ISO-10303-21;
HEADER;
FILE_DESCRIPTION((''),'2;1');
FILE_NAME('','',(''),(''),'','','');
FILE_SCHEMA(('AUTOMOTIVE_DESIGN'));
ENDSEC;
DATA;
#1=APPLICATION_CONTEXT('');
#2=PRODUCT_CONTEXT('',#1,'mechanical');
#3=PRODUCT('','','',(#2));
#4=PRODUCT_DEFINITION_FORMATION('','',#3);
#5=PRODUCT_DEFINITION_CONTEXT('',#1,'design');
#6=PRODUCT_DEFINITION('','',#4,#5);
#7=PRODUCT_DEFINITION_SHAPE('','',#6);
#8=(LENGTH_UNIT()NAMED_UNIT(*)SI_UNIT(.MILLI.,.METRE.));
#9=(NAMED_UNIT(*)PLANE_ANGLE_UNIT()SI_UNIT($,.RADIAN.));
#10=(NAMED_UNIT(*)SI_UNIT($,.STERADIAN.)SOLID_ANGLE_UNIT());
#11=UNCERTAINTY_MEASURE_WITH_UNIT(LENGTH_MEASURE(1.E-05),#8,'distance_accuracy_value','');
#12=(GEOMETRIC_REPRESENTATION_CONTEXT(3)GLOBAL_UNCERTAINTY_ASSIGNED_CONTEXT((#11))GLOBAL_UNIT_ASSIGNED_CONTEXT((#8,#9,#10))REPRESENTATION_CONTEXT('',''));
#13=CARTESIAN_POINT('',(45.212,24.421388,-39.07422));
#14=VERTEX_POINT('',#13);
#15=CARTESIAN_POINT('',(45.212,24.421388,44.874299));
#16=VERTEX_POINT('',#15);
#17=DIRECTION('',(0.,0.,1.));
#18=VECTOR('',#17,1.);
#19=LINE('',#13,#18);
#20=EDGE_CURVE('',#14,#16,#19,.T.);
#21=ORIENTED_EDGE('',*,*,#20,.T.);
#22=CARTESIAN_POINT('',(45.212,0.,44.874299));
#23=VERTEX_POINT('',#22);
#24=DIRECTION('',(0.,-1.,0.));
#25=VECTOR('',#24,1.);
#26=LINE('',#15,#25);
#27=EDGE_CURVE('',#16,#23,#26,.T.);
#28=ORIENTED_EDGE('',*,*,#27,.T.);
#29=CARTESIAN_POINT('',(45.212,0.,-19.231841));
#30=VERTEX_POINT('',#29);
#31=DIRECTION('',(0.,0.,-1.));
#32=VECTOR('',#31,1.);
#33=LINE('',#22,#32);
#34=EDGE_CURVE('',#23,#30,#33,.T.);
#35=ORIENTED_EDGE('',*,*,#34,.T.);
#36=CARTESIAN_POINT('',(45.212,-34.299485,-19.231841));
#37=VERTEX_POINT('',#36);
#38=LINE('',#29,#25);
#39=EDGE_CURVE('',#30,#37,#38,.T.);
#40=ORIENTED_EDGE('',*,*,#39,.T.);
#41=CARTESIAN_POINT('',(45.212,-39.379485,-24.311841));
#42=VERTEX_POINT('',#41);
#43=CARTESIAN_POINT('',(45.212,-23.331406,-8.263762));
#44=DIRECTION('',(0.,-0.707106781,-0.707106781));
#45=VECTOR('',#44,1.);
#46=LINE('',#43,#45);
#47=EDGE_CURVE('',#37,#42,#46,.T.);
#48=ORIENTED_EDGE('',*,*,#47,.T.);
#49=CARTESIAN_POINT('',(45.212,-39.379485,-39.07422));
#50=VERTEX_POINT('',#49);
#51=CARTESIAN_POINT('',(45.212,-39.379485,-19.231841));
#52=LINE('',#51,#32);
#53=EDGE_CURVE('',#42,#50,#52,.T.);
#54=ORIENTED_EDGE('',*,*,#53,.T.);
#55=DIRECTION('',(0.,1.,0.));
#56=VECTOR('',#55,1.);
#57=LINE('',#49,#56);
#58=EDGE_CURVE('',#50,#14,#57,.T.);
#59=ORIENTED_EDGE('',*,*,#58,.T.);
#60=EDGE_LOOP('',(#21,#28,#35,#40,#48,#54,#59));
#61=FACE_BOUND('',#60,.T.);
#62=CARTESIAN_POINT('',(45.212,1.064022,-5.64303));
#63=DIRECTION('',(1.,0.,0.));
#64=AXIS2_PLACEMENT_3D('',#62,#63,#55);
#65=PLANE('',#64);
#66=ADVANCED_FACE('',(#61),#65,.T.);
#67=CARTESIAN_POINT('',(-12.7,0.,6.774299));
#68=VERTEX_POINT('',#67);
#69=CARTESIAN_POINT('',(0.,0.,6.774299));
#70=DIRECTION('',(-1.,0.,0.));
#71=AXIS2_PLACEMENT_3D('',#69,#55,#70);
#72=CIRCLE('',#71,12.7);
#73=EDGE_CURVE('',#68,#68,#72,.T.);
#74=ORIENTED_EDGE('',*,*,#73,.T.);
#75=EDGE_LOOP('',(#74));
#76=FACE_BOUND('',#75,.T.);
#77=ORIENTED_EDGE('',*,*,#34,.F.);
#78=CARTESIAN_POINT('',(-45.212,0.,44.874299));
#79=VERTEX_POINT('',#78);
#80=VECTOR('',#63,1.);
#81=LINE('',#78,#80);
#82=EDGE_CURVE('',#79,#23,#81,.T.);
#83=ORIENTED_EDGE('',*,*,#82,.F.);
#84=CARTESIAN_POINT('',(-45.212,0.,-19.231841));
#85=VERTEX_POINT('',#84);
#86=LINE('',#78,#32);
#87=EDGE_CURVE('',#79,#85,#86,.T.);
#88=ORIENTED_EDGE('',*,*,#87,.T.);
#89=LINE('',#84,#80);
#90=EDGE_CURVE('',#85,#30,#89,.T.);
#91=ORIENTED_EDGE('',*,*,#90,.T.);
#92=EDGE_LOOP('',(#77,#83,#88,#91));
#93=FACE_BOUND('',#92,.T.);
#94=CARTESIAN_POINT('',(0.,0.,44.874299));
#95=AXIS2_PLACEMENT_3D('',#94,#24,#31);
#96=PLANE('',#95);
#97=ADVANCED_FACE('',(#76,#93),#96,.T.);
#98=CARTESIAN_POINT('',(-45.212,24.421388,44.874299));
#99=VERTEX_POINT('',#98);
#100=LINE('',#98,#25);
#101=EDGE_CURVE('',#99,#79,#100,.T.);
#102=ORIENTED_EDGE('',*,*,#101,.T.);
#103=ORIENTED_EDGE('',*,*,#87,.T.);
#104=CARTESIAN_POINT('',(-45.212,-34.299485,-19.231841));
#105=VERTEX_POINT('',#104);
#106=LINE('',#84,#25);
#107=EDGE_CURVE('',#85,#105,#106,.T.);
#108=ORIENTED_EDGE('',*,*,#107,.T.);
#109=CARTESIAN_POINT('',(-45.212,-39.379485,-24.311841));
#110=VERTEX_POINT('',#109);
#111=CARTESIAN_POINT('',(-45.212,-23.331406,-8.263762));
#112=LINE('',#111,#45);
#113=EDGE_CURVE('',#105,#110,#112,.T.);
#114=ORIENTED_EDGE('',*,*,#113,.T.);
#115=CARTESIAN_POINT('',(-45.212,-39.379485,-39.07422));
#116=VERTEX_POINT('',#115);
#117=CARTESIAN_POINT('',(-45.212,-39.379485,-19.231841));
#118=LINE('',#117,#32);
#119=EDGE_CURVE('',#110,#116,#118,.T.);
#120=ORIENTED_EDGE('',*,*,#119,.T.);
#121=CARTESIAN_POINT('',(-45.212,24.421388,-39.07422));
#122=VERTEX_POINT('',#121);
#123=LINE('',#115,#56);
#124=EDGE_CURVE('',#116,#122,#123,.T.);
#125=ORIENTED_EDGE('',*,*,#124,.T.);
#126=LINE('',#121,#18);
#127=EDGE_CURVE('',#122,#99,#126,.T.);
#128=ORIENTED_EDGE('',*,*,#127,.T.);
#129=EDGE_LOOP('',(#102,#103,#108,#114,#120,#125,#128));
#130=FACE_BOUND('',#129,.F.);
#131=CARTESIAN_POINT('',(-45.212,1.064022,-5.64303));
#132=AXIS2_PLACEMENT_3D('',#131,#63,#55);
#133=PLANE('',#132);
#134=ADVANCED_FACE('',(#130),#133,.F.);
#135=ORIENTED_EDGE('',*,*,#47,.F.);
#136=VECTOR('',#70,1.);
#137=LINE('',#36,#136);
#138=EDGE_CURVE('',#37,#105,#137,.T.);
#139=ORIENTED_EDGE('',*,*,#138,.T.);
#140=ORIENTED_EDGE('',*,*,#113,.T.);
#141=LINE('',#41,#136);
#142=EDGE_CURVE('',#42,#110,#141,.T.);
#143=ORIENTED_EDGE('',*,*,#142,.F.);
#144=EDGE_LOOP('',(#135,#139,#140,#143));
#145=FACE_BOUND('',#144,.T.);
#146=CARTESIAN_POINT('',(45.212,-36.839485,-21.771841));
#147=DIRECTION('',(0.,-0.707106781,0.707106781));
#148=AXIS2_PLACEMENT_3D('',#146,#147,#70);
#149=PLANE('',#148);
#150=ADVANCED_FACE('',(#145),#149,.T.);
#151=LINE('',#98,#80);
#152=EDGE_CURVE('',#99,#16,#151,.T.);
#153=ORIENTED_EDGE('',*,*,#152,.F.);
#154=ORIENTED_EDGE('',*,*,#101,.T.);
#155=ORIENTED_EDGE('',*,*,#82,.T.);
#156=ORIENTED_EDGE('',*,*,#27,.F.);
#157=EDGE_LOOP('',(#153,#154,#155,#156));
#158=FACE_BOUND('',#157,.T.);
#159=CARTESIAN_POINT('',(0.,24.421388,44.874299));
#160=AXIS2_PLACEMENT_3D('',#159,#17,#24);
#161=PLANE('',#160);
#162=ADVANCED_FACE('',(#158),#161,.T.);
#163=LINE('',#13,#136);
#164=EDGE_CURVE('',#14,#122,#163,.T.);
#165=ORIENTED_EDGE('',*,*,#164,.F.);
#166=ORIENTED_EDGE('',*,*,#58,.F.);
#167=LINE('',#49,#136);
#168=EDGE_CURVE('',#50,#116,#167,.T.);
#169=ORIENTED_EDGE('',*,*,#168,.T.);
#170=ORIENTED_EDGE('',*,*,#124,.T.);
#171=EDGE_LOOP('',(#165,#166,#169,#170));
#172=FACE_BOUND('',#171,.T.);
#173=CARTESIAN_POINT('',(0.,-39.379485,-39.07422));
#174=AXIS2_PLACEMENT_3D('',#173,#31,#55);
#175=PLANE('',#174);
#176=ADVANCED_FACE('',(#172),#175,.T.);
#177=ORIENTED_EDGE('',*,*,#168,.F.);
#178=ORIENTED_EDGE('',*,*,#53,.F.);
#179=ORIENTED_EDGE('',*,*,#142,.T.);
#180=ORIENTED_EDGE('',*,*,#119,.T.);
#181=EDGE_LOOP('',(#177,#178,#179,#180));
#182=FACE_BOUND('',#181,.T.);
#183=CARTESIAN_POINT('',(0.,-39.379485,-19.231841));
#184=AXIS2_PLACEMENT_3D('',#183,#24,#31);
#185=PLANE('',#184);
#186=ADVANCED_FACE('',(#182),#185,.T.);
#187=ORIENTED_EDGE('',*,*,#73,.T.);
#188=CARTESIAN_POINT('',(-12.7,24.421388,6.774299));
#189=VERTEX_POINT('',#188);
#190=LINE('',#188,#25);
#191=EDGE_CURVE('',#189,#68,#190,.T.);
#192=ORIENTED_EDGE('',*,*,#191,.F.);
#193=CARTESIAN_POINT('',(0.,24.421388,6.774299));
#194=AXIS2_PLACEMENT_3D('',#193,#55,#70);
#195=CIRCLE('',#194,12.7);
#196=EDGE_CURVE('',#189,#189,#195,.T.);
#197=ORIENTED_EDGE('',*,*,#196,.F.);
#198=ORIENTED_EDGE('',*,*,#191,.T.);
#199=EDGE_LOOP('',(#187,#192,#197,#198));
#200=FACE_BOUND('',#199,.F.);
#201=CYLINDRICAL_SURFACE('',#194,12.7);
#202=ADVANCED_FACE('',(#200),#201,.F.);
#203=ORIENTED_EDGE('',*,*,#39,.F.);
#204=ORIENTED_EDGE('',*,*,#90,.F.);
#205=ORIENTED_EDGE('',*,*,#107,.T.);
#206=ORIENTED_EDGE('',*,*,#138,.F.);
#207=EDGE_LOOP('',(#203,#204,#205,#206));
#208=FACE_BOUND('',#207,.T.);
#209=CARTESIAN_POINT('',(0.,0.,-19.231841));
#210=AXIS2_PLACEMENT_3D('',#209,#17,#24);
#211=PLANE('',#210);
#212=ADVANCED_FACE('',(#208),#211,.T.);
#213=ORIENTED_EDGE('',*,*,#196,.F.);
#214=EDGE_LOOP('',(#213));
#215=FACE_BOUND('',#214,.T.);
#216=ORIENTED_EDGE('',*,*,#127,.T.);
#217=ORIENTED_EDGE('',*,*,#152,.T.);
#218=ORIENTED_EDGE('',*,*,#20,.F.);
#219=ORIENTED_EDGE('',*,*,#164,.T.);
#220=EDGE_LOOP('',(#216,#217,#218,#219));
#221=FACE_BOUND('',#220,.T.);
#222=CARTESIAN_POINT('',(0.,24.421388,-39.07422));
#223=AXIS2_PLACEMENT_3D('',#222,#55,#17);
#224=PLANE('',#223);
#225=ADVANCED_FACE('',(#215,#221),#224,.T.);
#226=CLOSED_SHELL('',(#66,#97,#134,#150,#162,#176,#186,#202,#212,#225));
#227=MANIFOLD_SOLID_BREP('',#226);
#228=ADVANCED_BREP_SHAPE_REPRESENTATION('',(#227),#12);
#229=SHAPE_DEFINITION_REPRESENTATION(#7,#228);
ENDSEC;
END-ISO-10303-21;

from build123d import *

# Parameters (mm, degrees)
F1_DEPTH = 45.212
F2_R     = 12.7
F3_DEPTH = 25.4
F4_SIZE  = 5.08


# Not quite as in the source:
# - a feature of the source that left no trace in its solid (it failed there, or was rolled back) is left out


with BuildPart() as f1:
    # F0 (on Right) → F1 (new body, symmetric)
    with BuildSketch(Plane.YZ):
        Polygon((24.4213882834, -39.0742197633), (24.4213882834, 44.8742993176), (0, 44.8742993176), (0, -19.2318409681), (-39.3794849515, -19.2318409681), (-39.3794849515, -39.0742197633), align=None)
    extrude(amount=F1_DEPTH, both=True)

    # F2 (on face) → F3 (cut)
    with BuildSketch(Plane(origin=(0, 24.4213882834, 0), x_dir=(-1, 0, 0), z_dir=(0, 1, 0))):
        with Locations((0, 6.7742993176)):
            Circle(F2_R)
    extrude(amount=-F3_DEPTH, mode=Mode.SUBTRACT)

    # F4
    f4_edges = [f1.edges().sort_by_distance(p)[0] for p in [
        (0, -39.379485, -19.231841),
    ]]
    chamfer(f4_edges, length=F4_SIZE)


solid = f1.part
